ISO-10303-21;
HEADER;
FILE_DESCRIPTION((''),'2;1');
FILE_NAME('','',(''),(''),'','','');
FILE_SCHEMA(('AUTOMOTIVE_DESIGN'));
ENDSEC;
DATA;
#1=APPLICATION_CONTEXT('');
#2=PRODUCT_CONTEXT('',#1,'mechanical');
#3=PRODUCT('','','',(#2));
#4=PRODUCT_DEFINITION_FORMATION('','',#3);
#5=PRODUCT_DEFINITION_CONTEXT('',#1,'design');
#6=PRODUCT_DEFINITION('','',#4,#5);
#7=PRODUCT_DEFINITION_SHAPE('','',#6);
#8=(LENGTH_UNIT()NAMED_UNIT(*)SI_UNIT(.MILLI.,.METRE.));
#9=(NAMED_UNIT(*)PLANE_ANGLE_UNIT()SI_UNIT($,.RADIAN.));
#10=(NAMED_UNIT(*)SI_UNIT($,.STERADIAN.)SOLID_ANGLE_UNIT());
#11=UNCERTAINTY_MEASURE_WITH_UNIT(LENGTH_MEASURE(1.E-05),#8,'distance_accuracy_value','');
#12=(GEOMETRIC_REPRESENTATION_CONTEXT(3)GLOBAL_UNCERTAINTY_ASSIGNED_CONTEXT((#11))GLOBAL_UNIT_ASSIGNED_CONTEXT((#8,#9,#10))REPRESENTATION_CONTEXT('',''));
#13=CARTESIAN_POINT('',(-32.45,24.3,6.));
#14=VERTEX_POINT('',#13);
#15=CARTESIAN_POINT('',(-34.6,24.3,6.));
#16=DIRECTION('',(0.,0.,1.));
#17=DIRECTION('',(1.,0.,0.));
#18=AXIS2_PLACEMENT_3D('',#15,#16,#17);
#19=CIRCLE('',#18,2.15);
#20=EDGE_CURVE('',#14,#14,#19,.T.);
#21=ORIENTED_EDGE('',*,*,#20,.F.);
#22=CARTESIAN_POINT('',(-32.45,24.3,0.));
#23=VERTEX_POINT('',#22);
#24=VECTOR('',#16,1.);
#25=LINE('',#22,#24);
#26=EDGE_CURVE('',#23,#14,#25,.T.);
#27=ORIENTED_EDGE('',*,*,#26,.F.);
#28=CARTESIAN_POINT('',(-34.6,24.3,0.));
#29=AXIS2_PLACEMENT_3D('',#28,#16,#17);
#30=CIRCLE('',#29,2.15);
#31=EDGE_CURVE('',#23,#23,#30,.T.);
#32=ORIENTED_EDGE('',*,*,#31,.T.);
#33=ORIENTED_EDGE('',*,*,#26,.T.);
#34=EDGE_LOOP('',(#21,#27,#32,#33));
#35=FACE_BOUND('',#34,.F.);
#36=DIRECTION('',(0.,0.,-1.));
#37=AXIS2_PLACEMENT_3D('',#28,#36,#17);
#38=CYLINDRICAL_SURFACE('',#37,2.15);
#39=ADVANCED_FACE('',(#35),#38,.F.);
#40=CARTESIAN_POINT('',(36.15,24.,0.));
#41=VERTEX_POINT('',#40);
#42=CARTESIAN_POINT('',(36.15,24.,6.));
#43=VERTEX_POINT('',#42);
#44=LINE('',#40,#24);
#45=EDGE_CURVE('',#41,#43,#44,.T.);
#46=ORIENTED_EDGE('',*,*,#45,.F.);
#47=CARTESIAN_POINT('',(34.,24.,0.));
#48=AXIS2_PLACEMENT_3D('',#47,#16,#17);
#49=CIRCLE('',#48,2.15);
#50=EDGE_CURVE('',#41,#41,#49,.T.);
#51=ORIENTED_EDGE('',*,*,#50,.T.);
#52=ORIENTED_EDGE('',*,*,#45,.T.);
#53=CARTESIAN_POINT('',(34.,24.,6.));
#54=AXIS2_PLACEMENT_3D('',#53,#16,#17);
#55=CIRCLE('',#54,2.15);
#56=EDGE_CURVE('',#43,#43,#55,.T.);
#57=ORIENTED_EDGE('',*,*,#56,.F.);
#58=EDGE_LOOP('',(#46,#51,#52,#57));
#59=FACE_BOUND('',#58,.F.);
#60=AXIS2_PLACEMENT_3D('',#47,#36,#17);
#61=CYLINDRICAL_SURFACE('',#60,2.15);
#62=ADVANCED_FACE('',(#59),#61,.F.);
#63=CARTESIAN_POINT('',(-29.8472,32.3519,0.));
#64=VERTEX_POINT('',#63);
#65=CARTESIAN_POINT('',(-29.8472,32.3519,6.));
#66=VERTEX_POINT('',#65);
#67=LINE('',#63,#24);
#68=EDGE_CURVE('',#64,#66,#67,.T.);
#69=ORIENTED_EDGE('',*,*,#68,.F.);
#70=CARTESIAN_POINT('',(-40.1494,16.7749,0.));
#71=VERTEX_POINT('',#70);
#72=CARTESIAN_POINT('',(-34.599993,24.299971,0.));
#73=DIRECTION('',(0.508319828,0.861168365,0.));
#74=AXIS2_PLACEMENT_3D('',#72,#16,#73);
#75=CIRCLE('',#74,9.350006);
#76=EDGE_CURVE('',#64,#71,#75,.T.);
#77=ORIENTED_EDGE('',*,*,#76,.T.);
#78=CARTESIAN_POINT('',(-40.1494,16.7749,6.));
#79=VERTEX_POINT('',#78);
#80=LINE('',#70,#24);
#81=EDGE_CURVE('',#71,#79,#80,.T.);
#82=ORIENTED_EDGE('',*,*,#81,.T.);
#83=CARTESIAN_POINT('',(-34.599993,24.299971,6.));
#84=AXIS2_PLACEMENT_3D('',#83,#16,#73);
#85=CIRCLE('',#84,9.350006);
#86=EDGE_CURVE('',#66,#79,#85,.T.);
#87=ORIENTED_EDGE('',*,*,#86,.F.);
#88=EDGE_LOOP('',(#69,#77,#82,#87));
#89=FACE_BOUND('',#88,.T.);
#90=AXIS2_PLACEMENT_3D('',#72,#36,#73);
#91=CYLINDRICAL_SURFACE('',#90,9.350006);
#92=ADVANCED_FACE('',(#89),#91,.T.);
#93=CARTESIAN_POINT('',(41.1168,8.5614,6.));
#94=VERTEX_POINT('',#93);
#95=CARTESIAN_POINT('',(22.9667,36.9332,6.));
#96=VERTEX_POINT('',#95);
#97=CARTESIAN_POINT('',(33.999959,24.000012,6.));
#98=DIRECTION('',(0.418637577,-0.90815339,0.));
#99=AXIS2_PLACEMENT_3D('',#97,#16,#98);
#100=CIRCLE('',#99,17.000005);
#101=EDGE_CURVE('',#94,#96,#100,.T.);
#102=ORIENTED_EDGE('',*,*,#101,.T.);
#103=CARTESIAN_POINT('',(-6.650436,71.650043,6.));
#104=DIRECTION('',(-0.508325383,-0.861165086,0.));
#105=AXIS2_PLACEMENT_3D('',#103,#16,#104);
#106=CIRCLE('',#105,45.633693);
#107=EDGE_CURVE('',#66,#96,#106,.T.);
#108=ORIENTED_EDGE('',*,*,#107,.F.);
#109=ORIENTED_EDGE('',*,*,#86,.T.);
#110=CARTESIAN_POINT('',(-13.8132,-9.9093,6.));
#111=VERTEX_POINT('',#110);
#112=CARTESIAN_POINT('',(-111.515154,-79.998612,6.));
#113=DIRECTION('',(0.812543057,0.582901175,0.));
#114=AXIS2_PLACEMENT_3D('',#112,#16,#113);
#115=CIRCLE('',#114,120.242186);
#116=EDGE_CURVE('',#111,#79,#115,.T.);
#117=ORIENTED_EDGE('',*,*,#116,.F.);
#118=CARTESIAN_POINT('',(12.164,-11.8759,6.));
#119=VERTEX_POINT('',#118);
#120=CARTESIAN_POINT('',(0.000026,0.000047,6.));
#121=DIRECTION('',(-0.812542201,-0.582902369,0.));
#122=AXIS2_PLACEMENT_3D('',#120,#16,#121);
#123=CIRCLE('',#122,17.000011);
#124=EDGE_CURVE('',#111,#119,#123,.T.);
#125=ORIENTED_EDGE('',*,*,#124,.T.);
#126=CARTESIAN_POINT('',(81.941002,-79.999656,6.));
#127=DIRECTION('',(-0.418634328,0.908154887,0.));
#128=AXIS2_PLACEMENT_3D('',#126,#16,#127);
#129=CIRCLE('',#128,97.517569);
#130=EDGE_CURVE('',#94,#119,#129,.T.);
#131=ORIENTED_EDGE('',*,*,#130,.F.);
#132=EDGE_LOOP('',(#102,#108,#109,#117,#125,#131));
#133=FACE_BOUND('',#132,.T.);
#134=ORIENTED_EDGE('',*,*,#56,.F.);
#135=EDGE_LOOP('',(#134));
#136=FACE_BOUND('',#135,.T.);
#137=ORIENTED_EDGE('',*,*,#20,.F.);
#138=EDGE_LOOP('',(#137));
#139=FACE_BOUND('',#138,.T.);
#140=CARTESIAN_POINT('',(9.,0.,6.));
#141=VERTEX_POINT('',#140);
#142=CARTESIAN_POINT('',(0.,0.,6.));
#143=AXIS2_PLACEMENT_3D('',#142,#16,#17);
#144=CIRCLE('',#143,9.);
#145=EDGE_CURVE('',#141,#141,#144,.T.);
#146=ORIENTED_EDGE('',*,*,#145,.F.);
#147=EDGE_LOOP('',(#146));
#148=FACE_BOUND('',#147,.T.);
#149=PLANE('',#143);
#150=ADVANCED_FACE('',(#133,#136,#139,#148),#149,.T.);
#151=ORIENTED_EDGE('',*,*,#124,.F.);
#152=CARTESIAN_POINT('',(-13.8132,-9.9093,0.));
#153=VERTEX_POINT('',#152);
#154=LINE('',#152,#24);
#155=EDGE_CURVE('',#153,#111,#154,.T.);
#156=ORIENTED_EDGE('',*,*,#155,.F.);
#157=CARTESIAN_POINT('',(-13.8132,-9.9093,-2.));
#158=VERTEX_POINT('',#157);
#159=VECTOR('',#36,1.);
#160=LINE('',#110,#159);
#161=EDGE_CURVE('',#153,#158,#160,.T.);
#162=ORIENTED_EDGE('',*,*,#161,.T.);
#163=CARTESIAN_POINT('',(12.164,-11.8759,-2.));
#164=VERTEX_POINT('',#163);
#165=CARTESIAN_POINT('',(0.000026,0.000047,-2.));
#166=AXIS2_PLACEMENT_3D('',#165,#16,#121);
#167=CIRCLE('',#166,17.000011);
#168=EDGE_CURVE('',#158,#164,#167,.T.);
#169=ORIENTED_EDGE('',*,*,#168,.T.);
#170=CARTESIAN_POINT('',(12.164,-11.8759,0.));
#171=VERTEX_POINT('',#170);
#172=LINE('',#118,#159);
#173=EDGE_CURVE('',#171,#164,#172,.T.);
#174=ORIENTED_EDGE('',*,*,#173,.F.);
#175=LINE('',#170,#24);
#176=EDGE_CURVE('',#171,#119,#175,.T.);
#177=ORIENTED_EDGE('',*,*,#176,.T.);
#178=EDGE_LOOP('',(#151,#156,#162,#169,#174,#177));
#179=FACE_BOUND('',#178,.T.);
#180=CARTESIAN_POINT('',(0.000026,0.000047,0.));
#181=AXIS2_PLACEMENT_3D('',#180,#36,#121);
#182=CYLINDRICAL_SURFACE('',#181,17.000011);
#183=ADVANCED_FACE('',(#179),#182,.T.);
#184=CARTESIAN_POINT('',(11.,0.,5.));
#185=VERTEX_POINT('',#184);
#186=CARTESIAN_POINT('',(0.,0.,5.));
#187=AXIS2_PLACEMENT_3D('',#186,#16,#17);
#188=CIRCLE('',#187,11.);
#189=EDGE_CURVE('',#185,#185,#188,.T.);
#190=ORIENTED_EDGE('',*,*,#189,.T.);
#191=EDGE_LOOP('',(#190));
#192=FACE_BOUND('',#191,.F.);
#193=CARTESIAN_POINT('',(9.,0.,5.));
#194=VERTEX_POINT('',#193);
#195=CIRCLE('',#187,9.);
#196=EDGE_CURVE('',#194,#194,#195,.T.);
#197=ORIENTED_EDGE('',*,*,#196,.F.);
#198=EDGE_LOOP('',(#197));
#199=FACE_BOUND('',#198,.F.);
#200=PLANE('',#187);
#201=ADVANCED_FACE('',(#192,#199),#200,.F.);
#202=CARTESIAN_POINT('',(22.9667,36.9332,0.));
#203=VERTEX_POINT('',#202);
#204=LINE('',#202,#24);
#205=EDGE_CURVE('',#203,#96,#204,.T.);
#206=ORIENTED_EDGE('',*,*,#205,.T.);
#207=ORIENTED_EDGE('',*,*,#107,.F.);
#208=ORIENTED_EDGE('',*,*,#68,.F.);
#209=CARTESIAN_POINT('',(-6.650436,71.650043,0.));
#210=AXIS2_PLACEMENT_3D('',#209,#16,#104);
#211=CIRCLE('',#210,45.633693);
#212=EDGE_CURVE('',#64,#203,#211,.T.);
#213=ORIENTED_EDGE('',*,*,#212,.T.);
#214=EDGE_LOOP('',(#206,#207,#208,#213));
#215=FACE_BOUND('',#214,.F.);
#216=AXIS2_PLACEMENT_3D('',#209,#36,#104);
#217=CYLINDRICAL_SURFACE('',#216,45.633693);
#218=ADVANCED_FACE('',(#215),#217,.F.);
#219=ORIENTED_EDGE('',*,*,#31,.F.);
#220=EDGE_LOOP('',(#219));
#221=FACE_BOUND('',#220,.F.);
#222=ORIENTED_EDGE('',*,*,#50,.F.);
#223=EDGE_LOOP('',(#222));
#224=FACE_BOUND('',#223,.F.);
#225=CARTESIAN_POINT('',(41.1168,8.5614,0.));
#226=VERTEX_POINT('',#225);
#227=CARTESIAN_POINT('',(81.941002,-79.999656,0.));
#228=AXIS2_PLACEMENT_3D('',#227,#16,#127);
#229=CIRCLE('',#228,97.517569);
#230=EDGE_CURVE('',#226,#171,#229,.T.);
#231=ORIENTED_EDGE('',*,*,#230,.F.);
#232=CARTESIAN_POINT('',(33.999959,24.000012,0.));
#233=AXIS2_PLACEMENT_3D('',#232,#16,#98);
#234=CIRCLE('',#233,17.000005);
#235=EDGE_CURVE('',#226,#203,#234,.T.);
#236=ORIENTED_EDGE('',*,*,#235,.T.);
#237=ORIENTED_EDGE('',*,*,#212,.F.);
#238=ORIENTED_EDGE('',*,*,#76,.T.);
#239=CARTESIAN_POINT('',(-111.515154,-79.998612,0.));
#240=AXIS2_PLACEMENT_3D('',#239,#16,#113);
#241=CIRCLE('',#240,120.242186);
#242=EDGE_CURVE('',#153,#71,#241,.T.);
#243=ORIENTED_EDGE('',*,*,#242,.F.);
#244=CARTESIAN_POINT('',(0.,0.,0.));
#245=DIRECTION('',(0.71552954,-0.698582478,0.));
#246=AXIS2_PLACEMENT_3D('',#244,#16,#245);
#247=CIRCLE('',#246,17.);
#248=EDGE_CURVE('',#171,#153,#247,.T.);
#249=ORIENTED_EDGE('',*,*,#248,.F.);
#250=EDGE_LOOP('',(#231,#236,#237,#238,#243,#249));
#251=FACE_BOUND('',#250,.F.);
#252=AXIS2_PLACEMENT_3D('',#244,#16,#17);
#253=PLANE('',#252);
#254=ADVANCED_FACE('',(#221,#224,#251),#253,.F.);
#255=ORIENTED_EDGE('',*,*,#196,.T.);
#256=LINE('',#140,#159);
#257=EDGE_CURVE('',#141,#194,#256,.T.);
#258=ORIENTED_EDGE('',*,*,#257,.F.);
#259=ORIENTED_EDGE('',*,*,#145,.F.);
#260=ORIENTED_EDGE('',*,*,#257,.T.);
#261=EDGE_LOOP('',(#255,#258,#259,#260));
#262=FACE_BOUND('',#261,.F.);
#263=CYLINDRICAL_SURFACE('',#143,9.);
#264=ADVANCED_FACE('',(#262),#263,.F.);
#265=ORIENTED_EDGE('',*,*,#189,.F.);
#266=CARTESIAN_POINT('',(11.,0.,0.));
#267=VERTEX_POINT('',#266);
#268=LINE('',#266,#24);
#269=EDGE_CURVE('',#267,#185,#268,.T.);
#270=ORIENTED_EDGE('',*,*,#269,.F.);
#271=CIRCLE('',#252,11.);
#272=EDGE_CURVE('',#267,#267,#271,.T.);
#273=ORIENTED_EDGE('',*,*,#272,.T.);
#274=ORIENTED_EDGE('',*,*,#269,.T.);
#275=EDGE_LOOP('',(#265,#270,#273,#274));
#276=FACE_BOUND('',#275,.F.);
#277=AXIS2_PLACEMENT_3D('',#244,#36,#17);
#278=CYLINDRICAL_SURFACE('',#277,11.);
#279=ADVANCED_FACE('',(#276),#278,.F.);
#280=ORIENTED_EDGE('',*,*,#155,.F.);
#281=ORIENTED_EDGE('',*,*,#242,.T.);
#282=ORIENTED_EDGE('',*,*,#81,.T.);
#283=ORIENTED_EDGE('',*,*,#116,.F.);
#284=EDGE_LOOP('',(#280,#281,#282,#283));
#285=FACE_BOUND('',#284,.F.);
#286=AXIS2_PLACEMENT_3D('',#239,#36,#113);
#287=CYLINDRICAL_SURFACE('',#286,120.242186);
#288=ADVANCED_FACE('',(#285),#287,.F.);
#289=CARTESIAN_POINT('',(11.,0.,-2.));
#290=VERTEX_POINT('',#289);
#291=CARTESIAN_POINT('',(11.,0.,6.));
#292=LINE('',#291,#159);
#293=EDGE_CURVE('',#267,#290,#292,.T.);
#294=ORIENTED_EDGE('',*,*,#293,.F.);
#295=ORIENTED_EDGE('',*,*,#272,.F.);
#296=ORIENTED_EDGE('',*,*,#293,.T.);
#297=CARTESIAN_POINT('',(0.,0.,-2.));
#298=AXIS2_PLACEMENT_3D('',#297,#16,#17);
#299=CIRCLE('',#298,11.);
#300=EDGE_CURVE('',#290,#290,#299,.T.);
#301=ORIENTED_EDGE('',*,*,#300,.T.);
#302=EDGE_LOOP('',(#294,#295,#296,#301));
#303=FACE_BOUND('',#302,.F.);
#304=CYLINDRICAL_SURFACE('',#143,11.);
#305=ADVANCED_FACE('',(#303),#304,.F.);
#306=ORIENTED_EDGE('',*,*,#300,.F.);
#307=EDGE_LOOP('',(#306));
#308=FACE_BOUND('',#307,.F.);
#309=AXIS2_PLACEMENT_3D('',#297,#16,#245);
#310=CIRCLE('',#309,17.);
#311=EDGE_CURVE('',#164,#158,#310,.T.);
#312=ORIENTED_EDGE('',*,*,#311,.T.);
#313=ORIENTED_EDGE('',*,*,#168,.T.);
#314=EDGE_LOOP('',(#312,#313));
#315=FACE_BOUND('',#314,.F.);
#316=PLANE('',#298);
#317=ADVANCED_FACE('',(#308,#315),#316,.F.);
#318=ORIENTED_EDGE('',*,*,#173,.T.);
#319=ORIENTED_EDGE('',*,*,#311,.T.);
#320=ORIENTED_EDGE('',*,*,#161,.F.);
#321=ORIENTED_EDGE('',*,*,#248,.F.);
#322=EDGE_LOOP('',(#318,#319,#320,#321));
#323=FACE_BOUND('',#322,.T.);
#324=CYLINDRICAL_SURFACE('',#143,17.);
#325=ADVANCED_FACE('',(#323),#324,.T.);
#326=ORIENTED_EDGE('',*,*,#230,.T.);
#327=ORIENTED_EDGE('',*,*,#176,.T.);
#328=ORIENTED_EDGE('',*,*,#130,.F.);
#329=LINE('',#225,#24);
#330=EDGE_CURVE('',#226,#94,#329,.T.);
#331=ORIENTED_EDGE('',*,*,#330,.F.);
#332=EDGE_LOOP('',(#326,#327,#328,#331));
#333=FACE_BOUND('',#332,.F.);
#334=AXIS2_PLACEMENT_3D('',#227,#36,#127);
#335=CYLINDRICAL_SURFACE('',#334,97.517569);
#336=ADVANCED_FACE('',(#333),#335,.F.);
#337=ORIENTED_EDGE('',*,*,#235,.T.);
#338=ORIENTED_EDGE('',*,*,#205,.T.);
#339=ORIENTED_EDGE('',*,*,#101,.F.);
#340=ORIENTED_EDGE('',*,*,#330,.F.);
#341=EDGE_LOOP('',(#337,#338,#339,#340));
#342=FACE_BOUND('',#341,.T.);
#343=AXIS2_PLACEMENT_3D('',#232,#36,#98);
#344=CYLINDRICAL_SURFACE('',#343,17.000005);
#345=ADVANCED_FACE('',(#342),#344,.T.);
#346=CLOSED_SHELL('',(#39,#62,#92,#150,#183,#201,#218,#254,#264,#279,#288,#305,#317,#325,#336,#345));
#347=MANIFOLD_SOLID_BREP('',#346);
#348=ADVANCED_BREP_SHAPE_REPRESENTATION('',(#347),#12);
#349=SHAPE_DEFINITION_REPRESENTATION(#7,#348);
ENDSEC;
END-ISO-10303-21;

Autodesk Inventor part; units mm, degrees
ref_plane "YZ Plane" through (0, 0, 0) normal (1, 0, 0) x (0, 1, 0)
ref_plane "XZ Plane" through (0, 0, 0) normal (0, 1, 0) x (-1, 0, 0)
ref_plane "XY Plane" through (0, 0, 0) normal (0, 0, 1) x (1, 0, 0)
sketch "Sketch1" plane through (0, 0, 0) normal (0, 0, 1) x (1, 0, 0)
  circle A0 centre (0, 0) radius 11
  circle A1 centre (-34.6, 24.3) radius 2.15
  circle A2 centre (34, 24) radius 2.15
  arc A3 (-29.8472, 32.3519) -> (-40.1494, 16.7749) centre (-34.6, 24.3) ccw
  arc A4 (41.1168, 8.5614) -> (22.9667, 36.9332) centre (34, 24) ccw
  arc A5 (-13.8132, -9.9093) -> (12.164, -11.8759) centre (0, 0) ccw
  arc A6 (-13.8132, -9.9093) -> (-40.1494, 16.7749) centre (-111.5168, -80) ccw
  arc A7 (41.1168, 8.5614) -> (12.164, -11.8759) centre (81.9412, -80) ccw
  arc A8 (-29.8472, 32.3519) -> (22.9667, 36.9332) centre (-6.6504, 71.6502) ccw
  line L0 (-111.5168, -80) -> (81.9412, -80) construction
  dimension "d0" = 22
  dimension "d1" = 4.3
  dimension "d2" = 4.3
  dimension "d4" = 34
  dimension "d5" = 34.6
  dimension "d6" = 7.2
  dimension "d8" = 6
  dimension "d9" = 80
  dimension "d16" = 24.3
  dimension "d17" = 24
  dimension "d20" = 17
extrude "Extrusion1" add sketch "Sketch1" along normal blind 6
sketch "Sketch2" plane through (0, 0, 6) normal (0, 0, 1) x (1, 0, 0)
  circle A0 centre (0, 0) radius 11 projected
  arc A1 (-13.8132, -9.9093) -> (12.164, -11.8759) centre (0, 0) ccw projected
  circle A2 centre (0, 0) radius 17
  circle A3 centre (0, 0) radius 11
extrude "Extrusion2" add sketch "Sketch2" against normal blind 8
sketch "Sketch3" plane through (0, 0, 6) normal (0, 0, 1) x (1, 0, 0)
  circle A0 centre (0, 0) radius 11 projected
  circle A1 centre (0, 0) radius 9
  dimension "d21" = 18
extrude "Extrusion3" add sketch "Sketch3" against normal blind 1
equation "\"d2\" = d1"
properties part number "Arm 19X - parallel hinge"
